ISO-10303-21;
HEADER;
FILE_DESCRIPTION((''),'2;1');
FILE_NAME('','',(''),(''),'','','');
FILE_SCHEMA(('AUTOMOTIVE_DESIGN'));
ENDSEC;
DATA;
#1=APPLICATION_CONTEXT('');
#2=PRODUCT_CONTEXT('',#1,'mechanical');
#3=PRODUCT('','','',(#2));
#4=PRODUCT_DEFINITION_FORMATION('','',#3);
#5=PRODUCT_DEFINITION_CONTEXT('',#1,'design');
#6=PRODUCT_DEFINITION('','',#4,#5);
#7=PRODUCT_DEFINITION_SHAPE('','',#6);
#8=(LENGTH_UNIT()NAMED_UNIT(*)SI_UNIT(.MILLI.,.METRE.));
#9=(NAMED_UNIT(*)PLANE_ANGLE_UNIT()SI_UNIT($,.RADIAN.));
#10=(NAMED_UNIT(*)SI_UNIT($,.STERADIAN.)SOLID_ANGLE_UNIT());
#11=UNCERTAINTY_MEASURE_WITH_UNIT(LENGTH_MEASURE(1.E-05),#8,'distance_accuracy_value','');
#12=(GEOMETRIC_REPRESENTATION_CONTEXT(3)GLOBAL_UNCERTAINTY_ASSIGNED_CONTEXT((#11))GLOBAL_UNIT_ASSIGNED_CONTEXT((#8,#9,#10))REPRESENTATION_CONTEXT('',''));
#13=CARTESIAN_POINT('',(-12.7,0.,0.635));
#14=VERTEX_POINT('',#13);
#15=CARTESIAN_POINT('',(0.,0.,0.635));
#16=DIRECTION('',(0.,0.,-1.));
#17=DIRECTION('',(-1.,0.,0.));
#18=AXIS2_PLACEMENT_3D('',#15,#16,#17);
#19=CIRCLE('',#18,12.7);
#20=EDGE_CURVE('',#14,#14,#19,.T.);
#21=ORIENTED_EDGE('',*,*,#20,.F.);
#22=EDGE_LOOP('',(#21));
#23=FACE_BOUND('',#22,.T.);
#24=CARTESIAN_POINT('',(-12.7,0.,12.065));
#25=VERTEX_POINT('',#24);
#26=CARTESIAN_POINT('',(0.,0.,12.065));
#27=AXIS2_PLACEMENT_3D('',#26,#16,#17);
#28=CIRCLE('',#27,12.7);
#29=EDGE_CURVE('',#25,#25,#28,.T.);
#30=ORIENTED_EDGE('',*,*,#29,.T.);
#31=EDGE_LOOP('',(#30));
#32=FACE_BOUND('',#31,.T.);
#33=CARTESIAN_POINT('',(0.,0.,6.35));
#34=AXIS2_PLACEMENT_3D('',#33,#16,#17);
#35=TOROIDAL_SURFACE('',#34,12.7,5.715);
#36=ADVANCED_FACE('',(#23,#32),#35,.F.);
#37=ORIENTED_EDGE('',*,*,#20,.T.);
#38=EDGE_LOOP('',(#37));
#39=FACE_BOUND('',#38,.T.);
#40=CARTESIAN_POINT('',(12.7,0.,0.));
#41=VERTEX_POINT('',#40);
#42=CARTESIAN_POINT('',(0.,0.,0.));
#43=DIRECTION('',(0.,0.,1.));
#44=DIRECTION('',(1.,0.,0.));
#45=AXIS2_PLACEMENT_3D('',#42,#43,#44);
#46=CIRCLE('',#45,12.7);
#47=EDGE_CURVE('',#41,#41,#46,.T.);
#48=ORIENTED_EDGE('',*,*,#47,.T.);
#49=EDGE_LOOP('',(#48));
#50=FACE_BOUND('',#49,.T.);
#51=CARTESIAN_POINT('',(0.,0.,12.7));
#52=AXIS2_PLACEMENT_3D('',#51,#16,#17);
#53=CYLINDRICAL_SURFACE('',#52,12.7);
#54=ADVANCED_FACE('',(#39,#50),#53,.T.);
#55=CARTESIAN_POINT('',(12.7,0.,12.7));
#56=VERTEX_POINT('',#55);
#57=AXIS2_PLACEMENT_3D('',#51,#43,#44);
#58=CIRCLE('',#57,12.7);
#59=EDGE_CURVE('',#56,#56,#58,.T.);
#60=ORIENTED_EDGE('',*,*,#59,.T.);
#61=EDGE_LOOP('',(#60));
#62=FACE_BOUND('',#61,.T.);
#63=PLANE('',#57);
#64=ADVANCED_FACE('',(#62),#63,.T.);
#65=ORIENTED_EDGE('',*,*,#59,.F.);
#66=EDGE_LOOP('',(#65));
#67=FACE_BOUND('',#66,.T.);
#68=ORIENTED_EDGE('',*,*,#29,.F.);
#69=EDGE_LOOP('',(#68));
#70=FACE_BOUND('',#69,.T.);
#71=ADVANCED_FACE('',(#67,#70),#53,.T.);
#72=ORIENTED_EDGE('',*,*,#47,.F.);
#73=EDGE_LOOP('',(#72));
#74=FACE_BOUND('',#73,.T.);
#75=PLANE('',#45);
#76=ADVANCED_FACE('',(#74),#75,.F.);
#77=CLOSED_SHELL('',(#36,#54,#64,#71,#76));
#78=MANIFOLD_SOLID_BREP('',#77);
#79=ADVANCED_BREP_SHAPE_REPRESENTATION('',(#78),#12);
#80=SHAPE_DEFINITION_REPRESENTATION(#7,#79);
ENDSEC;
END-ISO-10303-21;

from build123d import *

# Parameters (mm, degrees)
SKETCH1_R           = 12.7
BOSS_EXTRUDE1_DEPTH = 12.7


with BuildPart() as part:
    # Sketch1 → Boss-Extrude1 (new body)
    with BuildSketch(Plane.XY):
        Circle(SKETCH1_R)
    extrude(amount=BOSS_EXTRUDE1_DEPTH)

    # Sketch2 → Cut-Revolve1 (revolve, cut)
    with BuildSketch(Plane(origin=(0, 0, 0), x_dir=(0, 0, -1), z_dir=(1, 0, 0)), mode=Mode.PRIVATE) as cut_revolve1_sk:
        with BuildLine():
            Line((-12.065, 12.7), (-0.635, 12.7))
            ThreePointArc((-0.635, 12.7), (-6.35, 6.985), (-12.065, 12.7))
        make_face()
    revolve(cut_revolve1_sk.sketch.rotate(Axis((0, 0, 6.35), (0, 0, 1)), 90), axis=Axis((0, 0, 6.35), (0, 0, 1)), mode=Mode.SUBTRACT)


solid = part.part
